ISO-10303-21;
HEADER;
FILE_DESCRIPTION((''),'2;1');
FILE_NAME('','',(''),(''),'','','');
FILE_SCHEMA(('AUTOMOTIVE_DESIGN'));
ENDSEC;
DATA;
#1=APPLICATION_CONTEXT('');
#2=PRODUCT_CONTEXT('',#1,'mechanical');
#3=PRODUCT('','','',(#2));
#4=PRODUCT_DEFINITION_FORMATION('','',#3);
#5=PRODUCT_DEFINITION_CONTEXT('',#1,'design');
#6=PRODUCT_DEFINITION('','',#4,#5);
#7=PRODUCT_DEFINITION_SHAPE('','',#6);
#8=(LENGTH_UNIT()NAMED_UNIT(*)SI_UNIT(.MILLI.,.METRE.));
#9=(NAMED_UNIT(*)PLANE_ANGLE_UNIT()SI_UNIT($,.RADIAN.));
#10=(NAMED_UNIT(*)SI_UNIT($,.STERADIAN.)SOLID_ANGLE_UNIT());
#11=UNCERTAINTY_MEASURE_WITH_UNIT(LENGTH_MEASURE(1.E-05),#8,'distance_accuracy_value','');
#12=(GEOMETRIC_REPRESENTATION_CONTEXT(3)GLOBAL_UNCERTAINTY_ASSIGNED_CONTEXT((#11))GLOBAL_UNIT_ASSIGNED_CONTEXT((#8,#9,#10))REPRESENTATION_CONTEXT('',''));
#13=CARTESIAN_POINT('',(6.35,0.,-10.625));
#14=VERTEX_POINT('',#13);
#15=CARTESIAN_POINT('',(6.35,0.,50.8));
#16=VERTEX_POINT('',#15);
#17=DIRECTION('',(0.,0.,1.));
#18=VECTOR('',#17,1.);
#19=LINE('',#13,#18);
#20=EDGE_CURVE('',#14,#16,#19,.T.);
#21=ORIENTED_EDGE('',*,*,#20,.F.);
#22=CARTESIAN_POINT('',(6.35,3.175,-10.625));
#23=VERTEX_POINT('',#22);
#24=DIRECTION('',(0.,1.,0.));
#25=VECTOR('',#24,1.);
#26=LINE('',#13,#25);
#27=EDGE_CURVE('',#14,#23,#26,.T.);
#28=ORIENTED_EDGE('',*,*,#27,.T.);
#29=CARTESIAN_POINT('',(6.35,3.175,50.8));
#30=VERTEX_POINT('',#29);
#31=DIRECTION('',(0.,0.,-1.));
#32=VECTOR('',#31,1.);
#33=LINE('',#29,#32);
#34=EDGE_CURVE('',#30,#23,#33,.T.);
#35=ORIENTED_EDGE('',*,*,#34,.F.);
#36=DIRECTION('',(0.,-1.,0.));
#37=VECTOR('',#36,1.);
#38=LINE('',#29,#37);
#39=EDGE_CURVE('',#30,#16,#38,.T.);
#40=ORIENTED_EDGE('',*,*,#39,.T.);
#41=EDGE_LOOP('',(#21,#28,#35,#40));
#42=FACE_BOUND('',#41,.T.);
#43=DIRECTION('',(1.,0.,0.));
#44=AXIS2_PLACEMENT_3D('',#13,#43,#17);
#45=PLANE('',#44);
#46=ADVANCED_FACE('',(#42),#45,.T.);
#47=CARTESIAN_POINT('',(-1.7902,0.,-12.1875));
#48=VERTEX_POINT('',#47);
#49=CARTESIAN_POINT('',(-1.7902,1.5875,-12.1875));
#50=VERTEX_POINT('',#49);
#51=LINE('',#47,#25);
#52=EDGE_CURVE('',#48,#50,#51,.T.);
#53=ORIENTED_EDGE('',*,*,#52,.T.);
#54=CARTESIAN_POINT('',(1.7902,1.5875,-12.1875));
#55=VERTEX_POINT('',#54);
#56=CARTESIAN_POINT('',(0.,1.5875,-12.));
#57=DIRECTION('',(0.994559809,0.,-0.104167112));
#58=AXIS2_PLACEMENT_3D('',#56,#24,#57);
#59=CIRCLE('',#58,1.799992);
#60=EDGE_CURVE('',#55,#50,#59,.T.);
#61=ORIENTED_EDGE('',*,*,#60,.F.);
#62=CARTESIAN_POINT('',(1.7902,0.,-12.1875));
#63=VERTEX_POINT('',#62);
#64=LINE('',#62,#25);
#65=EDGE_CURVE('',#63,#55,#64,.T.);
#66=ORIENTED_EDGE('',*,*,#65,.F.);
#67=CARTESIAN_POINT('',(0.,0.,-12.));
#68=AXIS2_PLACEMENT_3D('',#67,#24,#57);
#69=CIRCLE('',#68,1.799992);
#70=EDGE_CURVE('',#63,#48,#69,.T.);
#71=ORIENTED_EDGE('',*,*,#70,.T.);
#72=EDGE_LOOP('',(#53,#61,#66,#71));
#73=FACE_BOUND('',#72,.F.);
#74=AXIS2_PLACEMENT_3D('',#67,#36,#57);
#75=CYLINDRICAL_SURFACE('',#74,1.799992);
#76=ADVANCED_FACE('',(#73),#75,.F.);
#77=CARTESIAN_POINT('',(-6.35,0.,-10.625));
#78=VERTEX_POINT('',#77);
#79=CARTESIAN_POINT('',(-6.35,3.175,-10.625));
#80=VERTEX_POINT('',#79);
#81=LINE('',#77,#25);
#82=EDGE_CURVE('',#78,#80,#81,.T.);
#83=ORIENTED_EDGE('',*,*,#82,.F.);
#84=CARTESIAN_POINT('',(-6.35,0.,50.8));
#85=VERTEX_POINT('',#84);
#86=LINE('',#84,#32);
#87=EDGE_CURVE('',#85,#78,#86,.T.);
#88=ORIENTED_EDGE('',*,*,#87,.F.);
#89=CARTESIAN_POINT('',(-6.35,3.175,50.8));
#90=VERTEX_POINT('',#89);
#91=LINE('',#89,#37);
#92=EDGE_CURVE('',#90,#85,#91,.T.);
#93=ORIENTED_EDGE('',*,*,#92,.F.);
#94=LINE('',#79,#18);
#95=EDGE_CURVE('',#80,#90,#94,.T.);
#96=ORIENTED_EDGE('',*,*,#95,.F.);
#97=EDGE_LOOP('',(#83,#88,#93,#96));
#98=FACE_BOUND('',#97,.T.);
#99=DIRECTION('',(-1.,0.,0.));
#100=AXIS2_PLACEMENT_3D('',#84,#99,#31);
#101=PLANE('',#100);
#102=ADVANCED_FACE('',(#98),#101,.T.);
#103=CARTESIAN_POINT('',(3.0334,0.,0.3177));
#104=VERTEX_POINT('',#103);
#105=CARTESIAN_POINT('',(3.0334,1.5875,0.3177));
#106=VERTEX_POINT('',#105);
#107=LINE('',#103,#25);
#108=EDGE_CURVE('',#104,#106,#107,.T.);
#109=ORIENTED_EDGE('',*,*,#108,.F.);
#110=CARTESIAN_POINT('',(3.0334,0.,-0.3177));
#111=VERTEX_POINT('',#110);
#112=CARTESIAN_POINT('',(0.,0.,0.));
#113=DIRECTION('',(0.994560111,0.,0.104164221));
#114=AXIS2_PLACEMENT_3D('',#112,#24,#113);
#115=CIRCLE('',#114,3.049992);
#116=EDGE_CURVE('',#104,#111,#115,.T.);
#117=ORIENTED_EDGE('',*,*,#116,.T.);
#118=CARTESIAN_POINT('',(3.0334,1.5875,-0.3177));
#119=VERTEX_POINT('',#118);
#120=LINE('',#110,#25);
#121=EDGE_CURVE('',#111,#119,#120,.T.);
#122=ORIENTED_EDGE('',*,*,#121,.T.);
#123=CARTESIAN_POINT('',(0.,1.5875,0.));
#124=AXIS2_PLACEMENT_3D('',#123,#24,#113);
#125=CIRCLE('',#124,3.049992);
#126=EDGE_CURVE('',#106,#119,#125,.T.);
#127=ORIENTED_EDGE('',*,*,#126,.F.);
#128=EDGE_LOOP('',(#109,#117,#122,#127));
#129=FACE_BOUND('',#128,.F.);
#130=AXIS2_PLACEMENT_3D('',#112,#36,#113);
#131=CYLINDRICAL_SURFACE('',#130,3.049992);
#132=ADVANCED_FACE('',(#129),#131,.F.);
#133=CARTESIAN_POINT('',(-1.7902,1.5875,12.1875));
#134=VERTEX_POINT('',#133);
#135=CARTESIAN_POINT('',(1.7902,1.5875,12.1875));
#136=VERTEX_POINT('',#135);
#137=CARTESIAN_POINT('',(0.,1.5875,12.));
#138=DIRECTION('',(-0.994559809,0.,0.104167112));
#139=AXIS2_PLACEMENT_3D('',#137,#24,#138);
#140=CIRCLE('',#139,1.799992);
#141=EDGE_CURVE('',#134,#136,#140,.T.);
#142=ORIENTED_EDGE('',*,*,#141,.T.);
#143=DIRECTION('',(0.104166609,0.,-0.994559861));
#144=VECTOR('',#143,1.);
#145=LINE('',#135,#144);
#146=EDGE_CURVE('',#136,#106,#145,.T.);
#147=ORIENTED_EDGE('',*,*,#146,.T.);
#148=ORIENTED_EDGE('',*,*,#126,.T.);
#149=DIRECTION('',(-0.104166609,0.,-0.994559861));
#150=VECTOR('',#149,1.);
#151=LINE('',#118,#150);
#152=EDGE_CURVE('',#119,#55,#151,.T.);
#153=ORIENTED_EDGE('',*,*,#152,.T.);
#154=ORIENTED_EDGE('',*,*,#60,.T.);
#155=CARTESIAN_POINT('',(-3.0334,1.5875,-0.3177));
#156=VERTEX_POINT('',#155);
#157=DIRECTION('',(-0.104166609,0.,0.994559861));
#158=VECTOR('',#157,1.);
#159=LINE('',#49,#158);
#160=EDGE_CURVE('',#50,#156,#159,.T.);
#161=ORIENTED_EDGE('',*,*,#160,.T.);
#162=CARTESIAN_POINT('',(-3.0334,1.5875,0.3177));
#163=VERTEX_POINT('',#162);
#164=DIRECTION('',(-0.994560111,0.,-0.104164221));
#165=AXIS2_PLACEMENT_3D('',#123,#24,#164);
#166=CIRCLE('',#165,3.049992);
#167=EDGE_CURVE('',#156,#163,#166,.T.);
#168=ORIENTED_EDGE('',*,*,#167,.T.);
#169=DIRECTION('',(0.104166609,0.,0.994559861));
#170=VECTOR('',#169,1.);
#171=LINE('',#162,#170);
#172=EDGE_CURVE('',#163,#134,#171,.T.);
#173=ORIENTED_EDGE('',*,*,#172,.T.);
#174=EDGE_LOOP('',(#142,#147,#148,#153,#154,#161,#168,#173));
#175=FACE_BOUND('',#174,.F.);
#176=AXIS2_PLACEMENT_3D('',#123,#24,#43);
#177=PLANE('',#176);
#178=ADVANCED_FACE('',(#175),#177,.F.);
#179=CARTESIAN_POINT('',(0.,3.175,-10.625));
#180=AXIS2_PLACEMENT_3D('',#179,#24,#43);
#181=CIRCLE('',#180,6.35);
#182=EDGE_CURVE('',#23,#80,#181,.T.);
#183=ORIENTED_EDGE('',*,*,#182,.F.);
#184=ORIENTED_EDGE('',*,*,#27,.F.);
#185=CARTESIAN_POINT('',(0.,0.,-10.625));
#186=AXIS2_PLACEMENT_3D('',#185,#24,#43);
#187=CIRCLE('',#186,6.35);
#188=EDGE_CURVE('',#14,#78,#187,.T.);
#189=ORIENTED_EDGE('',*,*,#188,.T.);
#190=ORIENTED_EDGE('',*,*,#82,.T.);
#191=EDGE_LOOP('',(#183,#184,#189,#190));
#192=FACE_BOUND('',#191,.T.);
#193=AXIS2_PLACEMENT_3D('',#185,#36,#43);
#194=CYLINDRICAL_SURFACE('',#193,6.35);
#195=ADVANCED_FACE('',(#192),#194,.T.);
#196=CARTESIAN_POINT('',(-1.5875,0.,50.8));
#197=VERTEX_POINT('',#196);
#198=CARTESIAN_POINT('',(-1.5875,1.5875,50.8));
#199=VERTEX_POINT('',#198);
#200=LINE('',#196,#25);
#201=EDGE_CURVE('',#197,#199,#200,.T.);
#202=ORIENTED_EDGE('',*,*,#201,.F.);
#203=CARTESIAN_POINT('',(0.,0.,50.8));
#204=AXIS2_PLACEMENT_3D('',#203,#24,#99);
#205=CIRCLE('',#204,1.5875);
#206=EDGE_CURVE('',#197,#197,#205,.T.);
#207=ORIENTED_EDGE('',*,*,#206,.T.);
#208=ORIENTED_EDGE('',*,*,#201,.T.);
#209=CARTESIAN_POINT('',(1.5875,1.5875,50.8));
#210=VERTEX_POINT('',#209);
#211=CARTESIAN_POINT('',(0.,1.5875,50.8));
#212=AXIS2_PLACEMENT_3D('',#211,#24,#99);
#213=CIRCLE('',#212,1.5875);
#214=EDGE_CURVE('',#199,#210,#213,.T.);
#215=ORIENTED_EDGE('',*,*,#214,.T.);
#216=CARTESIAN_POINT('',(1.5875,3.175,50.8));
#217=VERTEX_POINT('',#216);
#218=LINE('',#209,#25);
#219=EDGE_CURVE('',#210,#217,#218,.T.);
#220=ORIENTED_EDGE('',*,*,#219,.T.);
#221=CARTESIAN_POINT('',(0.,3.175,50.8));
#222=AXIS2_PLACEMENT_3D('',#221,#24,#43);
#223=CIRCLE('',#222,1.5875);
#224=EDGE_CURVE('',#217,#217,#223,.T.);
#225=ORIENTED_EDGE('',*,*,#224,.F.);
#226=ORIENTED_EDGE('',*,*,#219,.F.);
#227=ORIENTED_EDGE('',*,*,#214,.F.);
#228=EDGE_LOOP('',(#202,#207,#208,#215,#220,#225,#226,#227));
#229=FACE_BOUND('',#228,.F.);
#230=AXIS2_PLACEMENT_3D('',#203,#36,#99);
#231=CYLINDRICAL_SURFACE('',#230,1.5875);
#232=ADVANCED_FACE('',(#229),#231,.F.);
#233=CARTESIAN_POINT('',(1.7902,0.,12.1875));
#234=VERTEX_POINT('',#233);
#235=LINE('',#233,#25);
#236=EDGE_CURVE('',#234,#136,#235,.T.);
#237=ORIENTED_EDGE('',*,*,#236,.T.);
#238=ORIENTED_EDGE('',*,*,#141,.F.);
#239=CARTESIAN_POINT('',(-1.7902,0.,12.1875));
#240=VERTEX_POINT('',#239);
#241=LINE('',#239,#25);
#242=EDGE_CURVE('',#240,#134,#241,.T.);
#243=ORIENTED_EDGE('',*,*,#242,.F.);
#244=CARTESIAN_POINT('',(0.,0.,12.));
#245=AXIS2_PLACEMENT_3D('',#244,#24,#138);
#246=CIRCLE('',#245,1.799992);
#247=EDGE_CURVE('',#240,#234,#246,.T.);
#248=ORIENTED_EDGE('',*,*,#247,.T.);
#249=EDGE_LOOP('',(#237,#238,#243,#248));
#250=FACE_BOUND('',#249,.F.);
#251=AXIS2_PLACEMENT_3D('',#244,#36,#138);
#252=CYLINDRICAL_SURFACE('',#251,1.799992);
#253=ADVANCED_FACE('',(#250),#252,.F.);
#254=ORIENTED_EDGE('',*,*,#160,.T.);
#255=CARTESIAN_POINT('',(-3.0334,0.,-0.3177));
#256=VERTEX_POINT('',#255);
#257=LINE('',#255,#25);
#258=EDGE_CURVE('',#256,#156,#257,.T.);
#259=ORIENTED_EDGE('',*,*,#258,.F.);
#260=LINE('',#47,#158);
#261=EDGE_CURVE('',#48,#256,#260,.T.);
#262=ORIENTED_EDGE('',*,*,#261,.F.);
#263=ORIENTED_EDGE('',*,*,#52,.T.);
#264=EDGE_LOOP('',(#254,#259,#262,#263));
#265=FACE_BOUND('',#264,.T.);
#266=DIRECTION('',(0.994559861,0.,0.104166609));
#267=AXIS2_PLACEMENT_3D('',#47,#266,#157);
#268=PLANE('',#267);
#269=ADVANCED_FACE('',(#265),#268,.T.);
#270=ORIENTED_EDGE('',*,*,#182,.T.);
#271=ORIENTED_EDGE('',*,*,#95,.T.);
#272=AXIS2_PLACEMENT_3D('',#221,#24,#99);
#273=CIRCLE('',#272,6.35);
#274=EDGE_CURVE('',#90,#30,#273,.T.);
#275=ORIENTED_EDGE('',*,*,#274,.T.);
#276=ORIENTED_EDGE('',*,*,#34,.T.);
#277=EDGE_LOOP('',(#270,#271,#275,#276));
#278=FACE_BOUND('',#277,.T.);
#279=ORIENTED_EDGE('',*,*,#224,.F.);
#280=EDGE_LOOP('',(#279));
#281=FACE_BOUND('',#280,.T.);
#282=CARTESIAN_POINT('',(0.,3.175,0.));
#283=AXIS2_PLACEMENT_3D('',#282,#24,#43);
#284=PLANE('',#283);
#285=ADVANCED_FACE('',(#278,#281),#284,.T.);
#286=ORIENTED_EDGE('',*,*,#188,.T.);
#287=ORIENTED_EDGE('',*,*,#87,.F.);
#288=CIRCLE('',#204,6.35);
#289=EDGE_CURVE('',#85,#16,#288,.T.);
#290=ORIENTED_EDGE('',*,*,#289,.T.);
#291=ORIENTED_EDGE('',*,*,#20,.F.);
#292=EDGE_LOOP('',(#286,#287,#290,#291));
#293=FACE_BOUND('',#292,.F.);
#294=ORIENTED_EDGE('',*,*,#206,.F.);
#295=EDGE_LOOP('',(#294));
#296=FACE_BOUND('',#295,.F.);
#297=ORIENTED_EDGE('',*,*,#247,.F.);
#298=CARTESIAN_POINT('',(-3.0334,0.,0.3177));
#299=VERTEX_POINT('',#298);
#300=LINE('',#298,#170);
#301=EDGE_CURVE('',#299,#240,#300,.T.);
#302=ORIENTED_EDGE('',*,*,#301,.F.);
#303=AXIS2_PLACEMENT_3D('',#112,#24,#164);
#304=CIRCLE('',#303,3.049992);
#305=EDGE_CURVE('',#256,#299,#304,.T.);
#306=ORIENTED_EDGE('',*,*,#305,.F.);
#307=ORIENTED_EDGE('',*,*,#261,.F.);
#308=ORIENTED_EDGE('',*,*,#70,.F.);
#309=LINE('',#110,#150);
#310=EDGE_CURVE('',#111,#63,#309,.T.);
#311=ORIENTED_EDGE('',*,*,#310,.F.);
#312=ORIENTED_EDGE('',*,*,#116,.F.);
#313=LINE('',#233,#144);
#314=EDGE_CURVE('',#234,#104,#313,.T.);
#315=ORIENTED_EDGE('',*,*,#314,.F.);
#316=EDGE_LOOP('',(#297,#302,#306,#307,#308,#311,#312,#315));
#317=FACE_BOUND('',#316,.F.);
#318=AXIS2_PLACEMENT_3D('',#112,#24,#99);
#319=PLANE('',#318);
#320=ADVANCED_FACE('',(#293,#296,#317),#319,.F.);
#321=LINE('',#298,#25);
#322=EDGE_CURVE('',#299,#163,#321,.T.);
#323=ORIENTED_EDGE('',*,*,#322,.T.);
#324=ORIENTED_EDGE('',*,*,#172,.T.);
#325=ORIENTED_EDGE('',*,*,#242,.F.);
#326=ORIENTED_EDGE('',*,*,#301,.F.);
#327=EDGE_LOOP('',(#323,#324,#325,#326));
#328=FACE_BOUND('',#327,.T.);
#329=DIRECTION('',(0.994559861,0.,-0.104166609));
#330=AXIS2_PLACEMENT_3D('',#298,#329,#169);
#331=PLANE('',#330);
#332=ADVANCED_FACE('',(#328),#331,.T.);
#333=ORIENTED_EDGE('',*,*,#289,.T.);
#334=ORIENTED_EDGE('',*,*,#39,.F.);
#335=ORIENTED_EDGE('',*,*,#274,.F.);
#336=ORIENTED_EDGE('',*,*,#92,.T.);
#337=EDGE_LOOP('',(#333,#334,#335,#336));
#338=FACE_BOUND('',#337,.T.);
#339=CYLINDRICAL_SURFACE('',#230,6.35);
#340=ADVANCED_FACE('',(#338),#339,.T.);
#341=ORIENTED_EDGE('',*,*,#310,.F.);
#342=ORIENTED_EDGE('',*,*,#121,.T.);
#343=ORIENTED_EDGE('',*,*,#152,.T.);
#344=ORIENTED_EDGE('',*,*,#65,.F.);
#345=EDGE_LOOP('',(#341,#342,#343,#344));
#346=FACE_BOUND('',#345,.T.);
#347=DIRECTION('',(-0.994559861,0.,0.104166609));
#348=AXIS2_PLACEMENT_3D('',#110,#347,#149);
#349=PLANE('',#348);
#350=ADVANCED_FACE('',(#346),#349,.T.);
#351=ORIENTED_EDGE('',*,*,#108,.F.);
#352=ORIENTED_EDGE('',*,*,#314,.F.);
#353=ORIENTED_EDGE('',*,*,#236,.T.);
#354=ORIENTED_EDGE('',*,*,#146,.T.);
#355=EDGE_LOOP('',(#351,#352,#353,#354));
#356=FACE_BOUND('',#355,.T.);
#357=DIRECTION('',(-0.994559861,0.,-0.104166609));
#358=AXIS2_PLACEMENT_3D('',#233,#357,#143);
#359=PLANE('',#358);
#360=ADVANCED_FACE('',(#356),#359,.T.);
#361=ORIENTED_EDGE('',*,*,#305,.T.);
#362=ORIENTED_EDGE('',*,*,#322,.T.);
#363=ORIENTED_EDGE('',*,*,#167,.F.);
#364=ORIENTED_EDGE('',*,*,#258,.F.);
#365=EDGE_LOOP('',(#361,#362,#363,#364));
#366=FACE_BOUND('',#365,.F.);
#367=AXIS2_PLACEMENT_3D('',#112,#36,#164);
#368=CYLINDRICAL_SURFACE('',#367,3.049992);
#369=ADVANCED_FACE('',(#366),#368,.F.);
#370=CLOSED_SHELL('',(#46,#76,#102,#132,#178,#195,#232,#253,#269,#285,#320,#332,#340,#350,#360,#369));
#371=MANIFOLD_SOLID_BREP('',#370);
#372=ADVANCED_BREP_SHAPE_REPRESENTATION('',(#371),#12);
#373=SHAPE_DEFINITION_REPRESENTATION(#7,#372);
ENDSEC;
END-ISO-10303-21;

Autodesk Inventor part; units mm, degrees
ref_plane "YZ Plane" through (0, 0, 0) normal (1, 0, 0) x (0, 1, 0)
ref_plane "XZ Plane" through (0, 0, 0) normal (0, 1, 0) x (-1, 0, 0)
ref_plane "XY Plane" through (0, 0, 0) normal (0, 0, 1) x (1, 0, 0)
sketch "Sketch1" plane through (0, 0, 0) normal (0, 1, 0) x (-1, 0, 0)
  arc A0 (1.4918, 12.1563) -> (-1.4918, 12.1563) centre (0, 12) ccw
  arc A1 (-1.4918, -12.1563) -> (1.4918, -12.1563) centre (0, -12) ccw
  line L0 (0, -12) -> (0, 12) construction
  line L1 (-2.735, 0.2865) -> (-1.4918, 12.1563)
  line L2 (1.4918, -12.1563) -> (2.735, -0.2865)
  line L3 (-1.4918, -12.1563) -> (-2.735, -0.2865)
  line L4 (2.735, 0.2865) -> (1.4918, 12.1563)
  arc A2 (-2.735, 0.2865) -> (-2.735, -0.2865) centre (0, 0) ccw
  arc A3 (2.735, -0.2865) -> (2.735, 0.2865) centre (0, 0) ccw
  line L5 (2.75, 0) -> (-2.75, 0) construction
  line L6 (-3.0334, -0.3177) -> (-1.7902, -12.1875)
  arc A4 (-1.7902, -12.1875) -> (1.7902, -12.1875) centre (0, -12) ccw
  line L7 (1.7902, -12.1875) -> (3.0334, -0.3177)
  arc A5 (3.0334, -0.3177) -> (3.0334, 0.3177) centre (0, 0) ccw
  line L8 (3.0334, 0.3177) -> (1.7902, 12.1875)
  arc A6 (1.7902, 12.1875) -> (-1.7902, 12.1875) centre (0, 12) ccw
  line L9 (-1.7902, 12.1875) -> (-3.0334, 0.3177)
  arc A7 (-3.0334, 0.3177) -> (-3.0334, -0.3177) centre (0, 0) ccw
  line L10 (0, -4.275) -> (0, 57.15) construction
  line L11 (-6.35, -10.625) -> (-6.35, 50.8)
  line L12 (6.35, 50.8) -> (6.35, -10.625)
  arc A8 (-6.35, -10.625) -> (6.35, -10.625) centre (0, -10.625) ccw
  arc A9 (6.35, 50.8) -> (-6.35, 50.8) centre (0, 50.8) ccw
  circle A10 centre (0, 50.8) radius 1.5875
  point P0 (0, 0)
  point P1 (0, -13.8)
  point P2 (0, -16.975)
  dimension "d5" = 3
  dimension "d6" = 3
  dimension "d7" = 24
  dimension "d8" = 5.5
  dimension "d9" = 0.3
  dimension "d13" = 50.8
  dimension "d15" = 3.175
  dimension "d17" = 3.175
  dimension "d19" = 6.35
  dimension "d20" = 6.35
extrude "Extrusion1" add sketch "Sketch1" along normal blind 1.5875 contours L11 A9 L12 A8
sketch "Sketch2" plane through (0, 1.5875, 0) normal (0, 1, 0) x (1, 0, 0)
  line L0 (6.35, -50.8) -> (6.35, 10.625) projected
  arc A0 (6.35, 10.625) -> (-6.35, 10.625) centre (0, 10.625) ccw projected
  line L1 (-6.35, 10.625) -> (-6.35, -50.8) projected
  arc A1 (-6.35, -50.8) -> (6.35, -50.8) centre (0, -50.8) ccw projected
  arc A2 (3.0334, -0.3177) -> (3.0334, 0.3177) centre (0, 0) ccw projected
  line L2 (3.0334, -0.3177) -> (1.7902, -12.1875) projected
  arc A3 (-1.7902, -12.1875) -> (1.7902, -12.1875) centre (0, -12) ccw projected
  line L3 (-1.7902, -12.1875) -> (-3.0334, -0.3177) projected
  arc A4 (-3.0334, 0.3177) -> (-3.0334, -0.3177) centre (0, 0) ccw projected
  line L4 (-3.0334, 0.3177) -> (-1.7902, 12.1875) projected
  arc A5 (1.7902, 12.1875) -> (-1.7902, 12.1875) centre (0, 12) ccw projected
  line L5 (1.7902, 12.1875) -> (3.0334, 0.3177) projected
  circle A6 centre (0, -50.8) radius 1.5875 projected
extrude "Extrusion2" add sketch "Sketch2" along normal blind 1.5875 contours A1 L1 A0 L0 | L2 A3 L3 A4 L4 A5 L5 A2
properties part number "arm3"
